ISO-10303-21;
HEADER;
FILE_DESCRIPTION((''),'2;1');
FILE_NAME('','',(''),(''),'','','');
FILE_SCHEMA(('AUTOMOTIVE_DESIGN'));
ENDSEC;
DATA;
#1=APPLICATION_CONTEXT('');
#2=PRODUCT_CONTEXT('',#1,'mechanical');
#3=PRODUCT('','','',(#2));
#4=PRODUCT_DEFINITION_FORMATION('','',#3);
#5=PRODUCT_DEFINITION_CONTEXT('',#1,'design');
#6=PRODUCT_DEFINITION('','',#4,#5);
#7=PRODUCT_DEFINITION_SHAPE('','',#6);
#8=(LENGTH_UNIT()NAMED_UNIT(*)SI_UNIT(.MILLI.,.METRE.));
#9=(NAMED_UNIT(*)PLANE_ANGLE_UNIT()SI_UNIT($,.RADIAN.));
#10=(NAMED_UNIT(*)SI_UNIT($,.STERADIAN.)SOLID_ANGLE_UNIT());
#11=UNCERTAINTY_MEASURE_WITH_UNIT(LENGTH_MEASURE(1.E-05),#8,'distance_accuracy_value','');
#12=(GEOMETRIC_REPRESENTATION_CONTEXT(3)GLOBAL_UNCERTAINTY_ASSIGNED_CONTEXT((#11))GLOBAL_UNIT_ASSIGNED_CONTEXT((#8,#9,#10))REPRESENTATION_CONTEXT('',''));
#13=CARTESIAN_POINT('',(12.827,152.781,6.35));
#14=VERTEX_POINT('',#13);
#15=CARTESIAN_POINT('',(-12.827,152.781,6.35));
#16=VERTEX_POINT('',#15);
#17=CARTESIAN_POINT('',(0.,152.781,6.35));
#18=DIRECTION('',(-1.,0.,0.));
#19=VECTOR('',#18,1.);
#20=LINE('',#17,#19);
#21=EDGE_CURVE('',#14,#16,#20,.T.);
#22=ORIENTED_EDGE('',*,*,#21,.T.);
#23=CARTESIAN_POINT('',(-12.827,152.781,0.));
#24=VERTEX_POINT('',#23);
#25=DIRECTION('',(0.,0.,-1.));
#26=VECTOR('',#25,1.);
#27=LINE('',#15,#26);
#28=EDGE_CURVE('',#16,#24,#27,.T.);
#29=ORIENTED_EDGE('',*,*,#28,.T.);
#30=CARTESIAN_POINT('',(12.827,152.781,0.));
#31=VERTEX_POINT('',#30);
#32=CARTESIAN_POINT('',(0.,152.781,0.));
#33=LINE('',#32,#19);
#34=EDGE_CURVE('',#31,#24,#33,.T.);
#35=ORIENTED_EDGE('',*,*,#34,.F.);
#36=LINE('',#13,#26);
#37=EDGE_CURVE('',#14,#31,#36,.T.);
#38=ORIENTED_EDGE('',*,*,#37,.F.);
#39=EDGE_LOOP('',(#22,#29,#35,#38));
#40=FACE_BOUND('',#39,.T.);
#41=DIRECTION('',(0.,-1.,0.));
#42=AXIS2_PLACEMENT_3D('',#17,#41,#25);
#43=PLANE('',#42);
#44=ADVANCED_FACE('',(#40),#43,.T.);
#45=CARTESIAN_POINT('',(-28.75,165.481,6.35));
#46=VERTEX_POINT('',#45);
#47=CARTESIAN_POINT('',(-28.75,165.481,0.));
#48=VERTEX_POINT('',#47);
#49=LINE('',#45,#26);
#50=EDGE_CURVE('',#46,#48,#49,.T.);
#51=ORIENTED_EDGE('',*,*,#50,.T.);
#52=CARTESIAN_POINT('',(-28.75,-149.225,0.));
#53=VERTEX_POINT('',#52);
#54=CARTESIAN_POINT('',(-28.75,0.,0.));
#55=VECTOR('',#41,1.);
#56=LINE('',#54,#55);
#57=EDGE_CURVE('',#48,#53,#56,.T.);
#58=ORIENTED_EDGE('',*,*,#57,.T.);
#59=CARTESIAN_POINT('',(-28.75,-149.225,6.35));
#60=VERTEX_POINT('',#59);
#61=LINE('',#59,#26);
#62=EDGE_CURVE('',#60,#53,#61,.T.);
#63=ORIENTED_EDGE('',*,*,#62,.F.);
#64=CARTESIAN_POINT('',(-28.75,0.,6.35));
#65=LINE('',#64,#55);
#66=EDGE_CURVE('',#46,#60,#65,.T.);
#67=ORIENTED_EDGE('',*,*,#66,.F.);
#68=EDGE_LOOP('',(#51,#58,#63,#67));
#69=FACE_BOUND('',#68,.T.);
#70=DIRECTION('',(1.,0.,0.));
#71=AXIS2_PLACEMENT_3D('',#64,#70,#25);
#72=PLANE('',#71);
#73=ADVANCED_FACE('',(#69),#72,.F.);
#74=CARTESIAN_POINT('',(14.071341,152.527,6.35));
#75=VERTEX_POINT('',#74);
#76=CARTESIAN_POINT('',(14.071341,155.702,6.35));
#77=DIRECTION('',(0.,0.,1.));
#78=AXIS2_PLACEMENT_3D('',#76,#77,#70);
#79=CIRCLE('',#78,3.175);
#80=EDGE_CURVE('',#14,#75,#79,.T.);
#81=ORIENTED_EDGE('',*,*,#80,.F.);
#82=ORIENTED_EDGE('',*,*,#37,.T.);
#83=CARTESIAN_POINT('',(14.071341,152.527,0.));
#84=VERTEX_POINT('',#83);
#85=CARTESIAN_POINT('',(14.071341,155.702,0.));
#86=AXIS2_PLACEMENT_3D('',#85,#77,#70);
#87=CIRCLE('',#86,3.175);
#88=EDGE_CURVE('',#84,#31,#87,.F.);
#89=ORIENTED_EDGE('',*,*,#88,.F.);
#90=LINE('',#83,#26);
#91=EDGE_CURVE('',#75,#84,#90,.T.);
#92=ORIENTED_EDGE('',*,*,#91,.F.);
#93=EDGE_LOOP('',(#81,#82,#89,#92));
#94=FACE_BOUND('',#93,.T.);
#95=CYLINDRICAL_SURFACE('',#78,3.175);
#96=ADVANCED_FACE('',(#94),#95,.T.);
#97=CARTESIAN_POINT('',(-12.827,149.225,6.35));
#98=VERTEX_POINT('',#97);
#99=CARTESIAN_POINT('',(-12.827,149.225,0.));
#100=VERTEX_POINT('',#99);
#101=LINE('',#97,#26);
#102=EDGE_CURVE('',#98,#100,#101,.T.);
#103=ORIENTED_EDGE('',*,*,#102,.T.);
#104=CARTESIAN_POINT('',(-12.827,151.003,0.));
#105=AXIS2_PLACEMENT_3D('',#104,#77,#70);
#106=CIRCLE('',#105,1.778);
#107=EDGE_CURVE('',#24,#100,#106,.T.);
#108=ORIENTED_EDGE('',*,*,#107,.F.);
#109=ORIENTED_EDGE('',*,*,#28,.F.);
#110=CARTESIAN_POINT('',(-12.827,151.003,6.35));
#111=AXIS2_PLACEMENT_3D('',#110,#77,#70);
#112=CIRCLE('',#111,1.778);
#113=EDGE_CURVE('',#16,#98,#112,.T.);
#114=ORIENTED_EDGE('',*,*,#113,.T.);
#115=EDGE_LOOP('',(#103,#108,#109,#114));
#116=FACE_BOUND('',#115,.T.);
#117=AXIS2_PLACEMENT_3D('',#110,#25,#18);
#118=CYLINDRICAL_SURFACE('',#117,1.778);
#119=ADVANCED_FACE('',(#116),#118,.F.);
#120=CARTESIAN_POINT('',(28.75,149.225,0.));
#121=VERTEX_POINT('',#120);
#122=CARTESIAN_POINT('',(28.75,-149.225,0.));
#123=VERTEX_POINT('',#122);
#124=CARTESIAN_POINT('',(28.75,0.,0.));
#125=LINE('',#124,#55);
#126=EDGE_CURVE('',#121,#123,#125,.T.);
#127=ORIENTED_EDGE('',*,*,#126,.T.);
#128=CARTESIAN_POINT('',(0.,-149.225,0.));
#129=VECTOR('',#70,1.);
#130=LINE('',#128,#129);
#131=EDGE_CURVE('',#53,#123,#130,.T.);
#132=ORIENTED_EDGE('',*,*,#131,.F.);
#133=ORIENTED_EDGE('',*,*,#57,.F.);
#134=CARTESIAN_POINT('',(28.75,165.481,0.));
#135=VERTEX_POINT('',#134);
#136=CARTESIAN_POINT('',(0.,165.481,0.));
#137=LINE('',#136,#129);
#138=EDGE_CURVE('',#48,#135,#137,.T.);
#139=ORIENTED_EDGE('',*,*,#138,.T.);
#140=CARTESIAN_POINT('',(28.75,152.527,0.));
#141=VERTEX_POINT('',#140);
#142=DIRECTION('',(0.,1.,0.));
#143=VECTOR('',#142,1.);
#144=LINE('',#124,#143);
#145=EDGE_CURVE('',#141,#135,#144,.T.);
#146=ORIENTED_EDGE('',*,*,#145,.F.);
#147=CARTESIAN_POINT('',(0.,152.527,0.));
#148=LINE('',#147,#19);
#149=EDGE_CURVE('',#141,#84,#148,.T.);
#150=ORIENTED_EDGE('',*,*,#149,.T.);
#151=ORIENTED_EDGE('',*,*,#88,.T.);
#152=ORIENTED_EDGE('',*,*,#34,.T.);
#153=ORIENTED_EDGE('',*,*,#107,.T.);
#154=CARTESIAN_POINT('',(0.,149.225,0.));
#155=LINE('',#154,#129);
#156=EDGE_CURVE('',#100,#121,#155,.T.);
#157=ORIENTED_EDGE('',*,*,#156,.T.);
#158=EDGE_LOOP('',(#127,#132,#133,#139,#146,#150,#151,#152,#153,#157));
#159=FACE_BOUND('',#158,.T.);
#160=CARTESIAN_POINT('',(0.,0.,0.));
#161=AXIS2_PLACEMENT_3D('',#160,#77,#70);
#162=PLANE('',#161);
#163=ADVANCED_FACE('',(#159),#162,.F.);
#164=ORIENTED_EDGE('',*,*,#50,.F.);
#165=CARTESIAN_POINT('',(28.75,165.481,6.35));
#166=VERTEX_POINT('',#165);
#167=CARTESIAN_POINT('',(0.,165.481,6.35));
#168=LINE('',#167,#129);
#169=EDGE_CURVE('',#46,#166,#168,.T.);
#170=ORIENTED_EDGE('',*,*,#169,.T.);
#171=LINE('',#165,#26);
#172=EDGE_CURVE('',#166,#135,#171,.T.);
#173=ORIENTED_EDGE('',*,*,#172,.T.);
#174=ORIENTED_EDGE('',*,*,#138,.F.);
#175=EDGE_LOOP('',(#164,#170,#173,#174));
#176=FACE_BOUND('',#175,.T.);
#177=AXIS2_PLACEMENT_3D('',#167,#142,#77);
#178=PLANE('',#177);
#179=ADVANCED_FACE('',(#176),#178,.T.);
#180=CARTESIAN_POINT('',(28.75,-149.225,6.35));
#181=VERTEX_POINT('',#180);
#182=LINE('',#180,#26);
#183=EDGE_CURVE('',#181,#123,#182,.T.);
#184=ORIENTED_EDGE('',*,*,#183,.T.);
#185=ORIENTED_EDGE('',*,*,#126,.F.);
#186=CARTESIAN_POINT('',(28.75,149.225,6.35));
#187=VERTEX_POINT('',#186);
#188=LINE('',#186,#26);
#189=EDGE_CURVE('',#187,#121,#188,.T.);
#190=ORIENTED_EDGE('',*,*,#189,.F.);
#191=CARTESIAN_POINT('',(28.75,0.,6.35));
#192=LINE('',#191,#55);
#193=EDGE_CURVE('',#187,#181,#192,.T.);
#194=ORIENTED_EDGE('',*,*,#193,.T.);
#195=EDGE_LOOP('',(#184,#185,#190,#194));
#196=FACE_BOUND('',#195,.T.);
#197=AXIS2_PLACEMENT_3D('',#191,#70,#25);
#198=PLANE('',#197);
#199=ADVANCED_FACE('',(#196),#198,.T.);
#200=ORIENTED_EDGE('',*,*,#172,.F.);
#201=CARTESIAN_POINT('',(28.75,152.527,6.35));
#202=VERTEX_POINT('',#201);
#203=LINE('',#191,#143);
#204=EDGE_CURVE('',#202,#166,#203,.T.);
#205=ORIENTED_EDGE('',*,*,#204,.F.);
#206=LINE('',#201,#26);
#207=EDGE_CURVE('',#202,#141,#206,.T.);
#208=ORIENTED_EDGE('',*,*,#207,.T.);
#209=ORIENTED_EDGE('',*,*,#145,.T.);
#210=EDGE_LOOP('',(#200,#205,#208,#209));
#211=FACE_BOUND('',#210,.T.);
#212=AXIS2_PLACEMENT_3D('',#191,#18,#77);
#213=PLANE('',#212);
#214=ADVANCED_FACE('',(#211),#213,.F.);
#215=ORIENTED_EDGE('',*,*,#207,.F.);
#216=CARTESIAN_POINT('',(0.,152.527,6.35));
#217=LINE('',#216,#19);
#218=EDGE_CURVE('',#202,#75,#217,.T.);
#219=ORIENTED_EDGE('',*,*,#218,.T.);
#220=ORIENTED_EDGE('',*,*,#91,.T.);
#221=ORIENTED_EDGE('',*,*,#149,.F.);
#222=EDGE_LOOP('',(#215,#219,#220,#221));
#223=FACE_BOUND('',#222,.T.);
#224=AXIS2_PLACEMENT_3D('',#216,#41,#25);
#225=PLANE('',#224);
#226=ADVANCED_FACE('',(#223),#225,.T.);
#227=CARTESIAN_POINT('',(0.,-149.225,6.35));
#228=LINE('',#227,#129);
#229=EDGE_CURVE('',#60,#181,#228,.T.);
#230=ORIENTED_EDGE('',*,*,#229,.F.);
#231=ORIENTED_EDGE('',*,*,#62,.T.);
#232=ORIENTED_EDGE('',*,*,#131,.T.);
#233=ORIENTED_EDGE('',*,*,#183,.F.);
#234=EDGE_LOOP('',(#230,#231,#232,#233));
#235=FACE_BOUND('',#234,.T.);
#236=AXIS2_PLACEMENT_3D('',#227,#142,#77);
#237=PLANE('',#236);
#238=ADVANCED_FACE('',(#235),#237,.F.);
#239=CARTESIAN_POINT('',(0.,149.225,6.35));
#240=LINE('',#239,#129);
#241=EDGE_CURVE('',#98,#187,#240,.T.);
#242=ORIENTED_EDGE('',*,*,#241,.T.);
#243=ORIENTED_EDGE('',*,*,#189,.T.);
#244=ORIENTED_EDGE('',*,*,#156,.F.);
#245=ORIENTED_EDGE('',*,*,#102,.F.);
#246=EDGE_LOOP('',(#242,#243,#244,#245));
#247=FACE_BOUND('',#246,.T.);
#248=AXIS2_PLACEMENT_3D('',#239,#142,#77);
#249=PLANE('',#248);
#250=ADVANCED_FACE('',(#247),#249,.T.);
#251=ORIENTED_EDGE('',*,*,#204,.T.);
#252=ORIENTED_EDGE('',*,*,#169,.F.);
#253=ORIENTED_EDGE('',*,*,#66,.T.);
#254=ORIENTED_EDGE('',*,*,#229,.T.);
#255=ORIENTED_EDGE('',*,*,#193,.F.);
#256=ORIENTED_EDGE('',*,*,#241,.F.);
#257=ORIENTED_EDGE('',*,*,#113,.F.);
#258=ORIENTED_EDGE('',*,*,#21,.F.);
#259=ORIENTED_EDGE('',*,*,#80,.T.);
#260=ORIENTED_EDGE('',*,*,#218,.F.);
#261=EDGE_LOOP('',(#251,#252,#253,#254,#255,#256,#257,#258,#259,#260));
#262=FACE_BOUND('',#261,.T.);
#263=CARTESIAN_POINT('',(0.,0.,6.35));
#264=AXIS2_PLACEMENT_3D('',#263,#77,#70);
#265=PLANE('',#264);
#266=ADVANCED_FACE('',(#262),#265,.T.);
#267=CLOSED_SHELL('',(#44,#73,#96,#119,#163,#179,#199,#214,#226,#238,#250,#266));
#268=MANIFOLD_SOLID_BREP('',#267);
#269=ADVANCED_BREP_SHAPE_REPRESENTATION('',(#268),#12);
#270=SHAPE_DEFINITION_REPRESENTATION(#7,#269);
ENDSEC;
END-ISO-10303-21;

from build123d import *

# Parameters (mm, degrees)
BOSS_EXTRUDE1_DEPTH = 6.35
FILLET1_R           = 3.175


with BuildPart() as part:
    # Sketch1 → Boss-Extrude1 (new body)
    with BuildSketch(Plane.XY):
        with BuildLine():
            Line((-28.75, 165.481), (-28.75, 149.225))
            Line((-28.75, 149.225), (-12.827, 149.225))
            ThreePointArc((-12.827, 149.225), (-14.605, 151.003), (-12.827, 152.781))
            Line((-12.827, 152.781), (12.827, 152.781))
            Line((12.827, 152.781), (12.827, 152.527))
            Line((12.827, 152.527), (28.75, 152.527))
            Line((28.75, 152.527), (28.75, 165.481))
            Line((28.75, 165.481), (-28.75, 165.481))
        make_face()
        Polygon((-12.827, 149.225), (-28.75, 149.225), (-28.75, -149.225), (28.75, -149.225), (28.75, 149.225), align=None)
    extrude(amount=BOSS_EXTRUDE1_DEPTH)

    # Fillet1
    # the kernel refuses this fillet: 3.175 mm, written as the material it takes off along each edge
    with BuildSketch(Plane(origin=(12.827, 152.527, -3.110851973), x_dir=(1, 0, 0), z_dir=(0, 0, 1))) as fillet1_piece_1:
        with BuildLine():
            CenterArc((1.244340789, 3.175), FILLET1_R, 246.926081934, 23.073918066)
            Line((0, 0.254), (-0.024886816, 0.19558))
            ThreePointArc((-0.024886816, 0.19558), (-0.0635, 0.127), (-0.0635, 0))
            Line((-0.0635, 0), (0, -0.0635))
            Line((0, -0.0635), (1.244340789, -0.0635))
            Line((1.244340789, -0.0635), (1.244340789, 0))
        make_face()
    extrude(amount=12.571703947, mode=Mode.SUBTRACT)


solid = part.part
